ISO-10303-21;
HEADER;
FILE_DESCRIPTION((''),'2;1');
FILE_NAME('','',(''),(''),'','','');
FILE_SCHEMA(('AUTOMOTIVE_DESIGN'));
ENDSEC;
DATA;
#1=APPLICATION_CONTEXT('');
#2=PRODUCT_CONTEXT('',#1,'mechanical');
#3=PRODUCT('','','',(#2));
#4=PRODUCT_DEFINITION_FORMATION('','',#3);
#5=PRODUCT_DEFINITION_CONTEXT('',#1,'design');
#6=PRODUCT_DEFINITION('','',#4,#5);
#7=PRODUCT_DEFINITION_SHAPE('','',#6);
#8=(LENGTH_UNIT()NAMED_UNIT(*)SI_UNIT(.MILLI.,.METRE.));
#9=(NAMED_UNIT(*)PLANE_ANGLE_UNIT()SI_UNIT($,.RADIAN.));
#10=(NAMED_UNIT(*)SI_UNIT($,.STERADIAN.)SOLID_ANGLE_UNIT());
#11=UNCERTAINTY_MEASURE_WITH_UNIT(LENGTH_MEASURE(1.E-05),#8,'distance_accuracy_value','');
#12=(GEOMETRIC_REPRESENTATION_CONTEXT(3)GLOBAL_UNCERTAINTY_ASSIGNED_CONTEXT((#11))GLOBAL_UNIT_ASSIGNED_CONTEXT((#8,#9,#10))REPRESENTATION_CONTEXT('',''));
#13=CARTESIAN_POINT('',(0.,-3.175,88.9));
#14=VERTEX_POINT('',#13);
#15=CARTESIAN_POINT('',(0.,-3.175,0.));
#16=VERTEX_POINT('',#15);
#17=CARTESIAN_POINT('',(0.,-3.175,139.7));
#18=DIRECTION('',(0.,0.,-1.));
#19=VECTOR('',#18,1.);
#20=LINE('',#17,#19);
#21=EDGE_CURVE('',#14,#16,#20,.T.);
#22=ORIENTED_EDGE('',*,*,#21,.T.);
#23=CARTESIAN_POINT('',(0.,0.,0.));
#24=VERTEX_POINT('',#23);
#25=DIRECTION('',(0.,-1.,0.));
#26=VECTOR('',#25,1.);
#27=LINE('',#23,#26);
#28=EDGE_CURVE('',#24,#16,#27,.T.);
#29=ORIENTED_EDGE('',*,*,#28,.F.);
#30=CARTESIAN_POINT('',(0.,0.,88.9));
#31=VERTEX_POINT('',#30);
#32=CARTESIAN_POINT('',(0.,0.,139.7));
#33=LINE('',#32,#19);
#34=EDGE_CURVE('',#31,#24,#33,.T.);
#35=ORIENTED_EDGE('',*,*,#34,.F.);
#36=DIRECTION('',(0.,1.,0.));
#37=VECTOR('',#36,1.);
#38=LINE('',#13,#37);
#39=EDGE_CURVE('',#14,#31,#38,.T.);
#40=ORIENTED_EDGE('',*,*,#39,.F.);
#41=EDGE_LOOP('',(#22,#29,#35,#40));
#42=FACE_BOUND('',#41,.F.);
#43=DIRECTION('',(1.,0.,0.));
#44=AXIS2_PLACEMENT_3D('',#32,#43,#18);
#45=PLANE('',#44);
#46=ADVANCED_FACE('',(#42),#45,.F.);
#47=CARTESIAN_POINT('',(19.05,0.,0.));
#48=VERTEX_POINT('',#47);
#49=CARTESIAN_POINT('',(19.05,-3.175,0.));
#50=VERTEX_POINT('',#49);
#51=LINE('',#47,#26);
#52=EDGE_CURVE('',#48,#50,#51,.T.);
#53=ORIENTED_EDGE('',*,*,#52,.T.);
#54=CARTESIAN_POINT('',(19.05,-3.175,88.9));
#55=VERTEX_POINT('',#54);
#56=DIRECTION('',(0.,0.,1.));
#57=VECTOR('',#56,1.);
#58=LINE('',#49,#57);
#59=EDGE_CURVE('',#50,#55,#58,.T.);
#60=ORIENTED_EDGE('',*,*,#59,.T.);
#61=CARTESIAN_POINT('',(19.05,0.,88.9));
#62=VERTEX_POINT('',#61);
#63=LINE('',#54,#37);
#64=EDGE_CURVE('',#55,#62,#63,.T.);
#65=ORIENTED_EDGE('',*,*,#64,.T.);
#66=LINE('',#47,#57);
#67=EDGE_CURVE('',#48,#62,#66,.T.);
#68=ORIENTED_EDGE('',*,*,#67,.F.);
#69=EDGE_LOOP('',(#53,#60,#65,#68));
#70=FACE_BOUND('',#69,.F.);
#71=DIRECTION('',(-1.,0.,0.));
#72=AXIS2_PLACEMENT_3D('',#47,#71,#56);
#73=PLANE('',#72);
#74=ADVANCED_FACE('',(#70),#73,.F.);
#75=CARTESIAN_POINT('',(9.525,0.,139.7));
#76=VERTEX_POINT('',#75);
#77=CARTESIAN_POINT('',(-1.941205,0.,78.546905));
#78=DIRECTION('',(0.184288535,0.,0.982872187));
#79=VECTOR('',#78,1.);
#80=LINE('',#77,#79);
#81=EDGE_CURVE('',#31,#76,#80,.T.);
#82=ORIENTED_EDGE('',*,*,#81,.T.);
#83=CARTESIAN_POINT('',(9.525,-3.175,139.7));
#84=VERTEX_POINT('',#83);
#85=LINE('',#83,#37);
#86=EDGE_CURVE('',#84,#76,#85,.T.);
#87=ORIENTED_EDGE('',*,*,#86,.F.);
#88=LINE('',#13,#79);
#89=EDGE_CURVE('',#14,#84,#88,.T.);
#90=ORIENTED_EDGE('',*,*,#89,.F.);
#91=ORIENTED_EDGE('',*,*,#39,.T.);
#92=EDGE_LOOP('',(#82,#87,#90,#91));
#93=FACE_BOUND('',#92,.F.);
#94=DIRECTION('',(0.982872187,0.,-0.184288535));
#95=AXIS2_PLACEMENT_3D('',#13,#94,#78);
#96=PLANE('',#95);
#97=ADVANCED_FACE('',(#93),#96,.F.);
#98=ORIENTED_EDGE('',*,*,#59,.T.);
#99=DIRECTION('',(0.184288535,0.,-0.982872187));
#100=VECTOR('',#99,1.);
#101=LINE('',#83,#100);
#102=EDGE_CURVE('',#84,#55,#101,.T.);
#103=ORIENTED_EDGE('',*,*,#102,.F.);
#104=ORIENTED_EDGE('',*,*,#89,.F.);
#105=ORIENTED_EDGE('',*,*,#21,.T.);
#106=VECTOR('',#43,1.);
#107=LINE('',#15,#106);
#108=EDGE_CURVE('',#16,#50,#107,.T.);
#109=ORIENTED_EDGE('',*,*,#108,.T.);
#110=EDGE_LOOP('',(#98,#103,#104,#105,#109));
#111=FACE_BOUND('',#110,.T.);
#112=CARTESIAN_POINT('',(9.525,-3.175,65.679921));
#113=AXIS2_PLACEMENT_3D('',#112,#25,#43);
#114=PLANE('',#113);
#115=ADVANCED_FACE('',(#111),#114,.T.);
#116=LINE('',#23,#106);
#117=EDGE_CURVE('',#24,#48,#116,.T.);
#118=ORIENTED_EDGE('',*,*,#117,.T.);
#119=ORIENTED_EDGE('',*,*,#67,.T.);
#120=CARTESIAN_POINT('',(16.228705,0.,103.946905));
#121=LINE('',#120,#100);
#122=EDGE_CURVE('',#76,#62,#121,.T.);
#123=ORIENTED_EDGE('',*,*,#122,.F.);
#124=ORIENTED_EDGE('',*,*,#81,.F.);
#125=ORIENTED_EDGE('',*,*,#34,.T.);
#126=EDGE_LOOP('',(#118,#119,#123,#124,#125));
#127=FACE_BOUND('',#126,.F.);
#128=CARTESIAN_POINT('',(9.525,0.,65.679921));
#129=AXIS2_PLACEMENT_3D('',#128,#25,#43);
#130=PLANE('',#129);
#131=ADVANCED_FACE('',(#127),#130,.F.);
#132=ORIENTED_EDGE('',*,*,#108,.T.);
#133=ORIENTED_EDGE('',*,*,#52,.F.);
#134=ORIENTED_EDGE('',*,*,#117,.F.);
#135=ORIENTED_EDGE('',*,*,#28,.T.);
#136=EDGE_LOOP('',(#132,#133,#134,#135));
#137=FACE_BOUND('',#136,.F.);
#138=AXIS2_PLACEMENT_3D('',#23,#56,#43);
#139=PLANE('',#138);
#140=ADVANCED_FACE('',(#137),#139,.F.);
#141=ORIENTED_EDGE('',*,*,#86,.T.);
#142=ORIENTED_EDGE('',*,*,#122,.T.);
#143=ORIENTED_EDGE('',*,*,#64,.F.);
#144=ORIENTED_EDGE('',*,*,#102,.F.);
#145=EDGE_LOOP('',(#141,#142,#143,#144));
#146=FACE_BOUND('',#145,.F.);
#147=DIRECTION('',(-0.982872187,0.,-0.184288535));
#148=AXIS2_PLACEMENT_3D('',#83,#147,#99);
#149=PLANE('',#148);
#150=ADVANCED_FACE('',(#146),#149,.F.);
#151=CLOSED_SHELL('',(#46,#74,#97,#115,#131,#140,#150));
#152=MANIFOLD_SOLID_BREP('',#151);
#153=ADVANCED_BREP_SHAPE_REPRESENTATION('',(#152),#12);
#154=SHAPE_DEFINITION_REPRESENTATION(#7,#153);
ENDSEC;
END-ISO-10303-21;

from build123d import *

# Parameters (mm, degrees)
F1_DEPTH = 3.175
F3_DEPTH = 25.4


# Not quite as in the source:
# - a length typed as a fraction of an inch, garbled in the dataset ("3 / 203.2 mm" for 3/8 in), is restored


with BuildPart() as f1:
    # F0 (on Front) → F1 (new body)
    with BuildSketch(Plane.XZ):
        Polygon((0, 88.9), (0, 0), (19.05, 0), (19.05, 88.9), (9.525, 139.7), align=None)
        Polygon((0, 139.7), (0, 88.9), (9.525, 139.7), align=None)
        Polygon((9.525, 139.7), (19.05, 88.9), (19.05, 139.7), align=None)
    extrude(amount=F1_DEPTH)

    # F2 (on face) → F3 (cut)
    with BuildSketch(Plane.XZ.offset(3.175)):
        Polygon((0, 139.7), (0, 88.9), (9.525, 139.7), align=None)
        Polygon((19.05, 139.7), (9.525, 139.7), (19.05, 88.9), align=None)
    extrude(amount=-F3_DEPTH, mode=Mode.SUBTRACT)


solid = f1.part
